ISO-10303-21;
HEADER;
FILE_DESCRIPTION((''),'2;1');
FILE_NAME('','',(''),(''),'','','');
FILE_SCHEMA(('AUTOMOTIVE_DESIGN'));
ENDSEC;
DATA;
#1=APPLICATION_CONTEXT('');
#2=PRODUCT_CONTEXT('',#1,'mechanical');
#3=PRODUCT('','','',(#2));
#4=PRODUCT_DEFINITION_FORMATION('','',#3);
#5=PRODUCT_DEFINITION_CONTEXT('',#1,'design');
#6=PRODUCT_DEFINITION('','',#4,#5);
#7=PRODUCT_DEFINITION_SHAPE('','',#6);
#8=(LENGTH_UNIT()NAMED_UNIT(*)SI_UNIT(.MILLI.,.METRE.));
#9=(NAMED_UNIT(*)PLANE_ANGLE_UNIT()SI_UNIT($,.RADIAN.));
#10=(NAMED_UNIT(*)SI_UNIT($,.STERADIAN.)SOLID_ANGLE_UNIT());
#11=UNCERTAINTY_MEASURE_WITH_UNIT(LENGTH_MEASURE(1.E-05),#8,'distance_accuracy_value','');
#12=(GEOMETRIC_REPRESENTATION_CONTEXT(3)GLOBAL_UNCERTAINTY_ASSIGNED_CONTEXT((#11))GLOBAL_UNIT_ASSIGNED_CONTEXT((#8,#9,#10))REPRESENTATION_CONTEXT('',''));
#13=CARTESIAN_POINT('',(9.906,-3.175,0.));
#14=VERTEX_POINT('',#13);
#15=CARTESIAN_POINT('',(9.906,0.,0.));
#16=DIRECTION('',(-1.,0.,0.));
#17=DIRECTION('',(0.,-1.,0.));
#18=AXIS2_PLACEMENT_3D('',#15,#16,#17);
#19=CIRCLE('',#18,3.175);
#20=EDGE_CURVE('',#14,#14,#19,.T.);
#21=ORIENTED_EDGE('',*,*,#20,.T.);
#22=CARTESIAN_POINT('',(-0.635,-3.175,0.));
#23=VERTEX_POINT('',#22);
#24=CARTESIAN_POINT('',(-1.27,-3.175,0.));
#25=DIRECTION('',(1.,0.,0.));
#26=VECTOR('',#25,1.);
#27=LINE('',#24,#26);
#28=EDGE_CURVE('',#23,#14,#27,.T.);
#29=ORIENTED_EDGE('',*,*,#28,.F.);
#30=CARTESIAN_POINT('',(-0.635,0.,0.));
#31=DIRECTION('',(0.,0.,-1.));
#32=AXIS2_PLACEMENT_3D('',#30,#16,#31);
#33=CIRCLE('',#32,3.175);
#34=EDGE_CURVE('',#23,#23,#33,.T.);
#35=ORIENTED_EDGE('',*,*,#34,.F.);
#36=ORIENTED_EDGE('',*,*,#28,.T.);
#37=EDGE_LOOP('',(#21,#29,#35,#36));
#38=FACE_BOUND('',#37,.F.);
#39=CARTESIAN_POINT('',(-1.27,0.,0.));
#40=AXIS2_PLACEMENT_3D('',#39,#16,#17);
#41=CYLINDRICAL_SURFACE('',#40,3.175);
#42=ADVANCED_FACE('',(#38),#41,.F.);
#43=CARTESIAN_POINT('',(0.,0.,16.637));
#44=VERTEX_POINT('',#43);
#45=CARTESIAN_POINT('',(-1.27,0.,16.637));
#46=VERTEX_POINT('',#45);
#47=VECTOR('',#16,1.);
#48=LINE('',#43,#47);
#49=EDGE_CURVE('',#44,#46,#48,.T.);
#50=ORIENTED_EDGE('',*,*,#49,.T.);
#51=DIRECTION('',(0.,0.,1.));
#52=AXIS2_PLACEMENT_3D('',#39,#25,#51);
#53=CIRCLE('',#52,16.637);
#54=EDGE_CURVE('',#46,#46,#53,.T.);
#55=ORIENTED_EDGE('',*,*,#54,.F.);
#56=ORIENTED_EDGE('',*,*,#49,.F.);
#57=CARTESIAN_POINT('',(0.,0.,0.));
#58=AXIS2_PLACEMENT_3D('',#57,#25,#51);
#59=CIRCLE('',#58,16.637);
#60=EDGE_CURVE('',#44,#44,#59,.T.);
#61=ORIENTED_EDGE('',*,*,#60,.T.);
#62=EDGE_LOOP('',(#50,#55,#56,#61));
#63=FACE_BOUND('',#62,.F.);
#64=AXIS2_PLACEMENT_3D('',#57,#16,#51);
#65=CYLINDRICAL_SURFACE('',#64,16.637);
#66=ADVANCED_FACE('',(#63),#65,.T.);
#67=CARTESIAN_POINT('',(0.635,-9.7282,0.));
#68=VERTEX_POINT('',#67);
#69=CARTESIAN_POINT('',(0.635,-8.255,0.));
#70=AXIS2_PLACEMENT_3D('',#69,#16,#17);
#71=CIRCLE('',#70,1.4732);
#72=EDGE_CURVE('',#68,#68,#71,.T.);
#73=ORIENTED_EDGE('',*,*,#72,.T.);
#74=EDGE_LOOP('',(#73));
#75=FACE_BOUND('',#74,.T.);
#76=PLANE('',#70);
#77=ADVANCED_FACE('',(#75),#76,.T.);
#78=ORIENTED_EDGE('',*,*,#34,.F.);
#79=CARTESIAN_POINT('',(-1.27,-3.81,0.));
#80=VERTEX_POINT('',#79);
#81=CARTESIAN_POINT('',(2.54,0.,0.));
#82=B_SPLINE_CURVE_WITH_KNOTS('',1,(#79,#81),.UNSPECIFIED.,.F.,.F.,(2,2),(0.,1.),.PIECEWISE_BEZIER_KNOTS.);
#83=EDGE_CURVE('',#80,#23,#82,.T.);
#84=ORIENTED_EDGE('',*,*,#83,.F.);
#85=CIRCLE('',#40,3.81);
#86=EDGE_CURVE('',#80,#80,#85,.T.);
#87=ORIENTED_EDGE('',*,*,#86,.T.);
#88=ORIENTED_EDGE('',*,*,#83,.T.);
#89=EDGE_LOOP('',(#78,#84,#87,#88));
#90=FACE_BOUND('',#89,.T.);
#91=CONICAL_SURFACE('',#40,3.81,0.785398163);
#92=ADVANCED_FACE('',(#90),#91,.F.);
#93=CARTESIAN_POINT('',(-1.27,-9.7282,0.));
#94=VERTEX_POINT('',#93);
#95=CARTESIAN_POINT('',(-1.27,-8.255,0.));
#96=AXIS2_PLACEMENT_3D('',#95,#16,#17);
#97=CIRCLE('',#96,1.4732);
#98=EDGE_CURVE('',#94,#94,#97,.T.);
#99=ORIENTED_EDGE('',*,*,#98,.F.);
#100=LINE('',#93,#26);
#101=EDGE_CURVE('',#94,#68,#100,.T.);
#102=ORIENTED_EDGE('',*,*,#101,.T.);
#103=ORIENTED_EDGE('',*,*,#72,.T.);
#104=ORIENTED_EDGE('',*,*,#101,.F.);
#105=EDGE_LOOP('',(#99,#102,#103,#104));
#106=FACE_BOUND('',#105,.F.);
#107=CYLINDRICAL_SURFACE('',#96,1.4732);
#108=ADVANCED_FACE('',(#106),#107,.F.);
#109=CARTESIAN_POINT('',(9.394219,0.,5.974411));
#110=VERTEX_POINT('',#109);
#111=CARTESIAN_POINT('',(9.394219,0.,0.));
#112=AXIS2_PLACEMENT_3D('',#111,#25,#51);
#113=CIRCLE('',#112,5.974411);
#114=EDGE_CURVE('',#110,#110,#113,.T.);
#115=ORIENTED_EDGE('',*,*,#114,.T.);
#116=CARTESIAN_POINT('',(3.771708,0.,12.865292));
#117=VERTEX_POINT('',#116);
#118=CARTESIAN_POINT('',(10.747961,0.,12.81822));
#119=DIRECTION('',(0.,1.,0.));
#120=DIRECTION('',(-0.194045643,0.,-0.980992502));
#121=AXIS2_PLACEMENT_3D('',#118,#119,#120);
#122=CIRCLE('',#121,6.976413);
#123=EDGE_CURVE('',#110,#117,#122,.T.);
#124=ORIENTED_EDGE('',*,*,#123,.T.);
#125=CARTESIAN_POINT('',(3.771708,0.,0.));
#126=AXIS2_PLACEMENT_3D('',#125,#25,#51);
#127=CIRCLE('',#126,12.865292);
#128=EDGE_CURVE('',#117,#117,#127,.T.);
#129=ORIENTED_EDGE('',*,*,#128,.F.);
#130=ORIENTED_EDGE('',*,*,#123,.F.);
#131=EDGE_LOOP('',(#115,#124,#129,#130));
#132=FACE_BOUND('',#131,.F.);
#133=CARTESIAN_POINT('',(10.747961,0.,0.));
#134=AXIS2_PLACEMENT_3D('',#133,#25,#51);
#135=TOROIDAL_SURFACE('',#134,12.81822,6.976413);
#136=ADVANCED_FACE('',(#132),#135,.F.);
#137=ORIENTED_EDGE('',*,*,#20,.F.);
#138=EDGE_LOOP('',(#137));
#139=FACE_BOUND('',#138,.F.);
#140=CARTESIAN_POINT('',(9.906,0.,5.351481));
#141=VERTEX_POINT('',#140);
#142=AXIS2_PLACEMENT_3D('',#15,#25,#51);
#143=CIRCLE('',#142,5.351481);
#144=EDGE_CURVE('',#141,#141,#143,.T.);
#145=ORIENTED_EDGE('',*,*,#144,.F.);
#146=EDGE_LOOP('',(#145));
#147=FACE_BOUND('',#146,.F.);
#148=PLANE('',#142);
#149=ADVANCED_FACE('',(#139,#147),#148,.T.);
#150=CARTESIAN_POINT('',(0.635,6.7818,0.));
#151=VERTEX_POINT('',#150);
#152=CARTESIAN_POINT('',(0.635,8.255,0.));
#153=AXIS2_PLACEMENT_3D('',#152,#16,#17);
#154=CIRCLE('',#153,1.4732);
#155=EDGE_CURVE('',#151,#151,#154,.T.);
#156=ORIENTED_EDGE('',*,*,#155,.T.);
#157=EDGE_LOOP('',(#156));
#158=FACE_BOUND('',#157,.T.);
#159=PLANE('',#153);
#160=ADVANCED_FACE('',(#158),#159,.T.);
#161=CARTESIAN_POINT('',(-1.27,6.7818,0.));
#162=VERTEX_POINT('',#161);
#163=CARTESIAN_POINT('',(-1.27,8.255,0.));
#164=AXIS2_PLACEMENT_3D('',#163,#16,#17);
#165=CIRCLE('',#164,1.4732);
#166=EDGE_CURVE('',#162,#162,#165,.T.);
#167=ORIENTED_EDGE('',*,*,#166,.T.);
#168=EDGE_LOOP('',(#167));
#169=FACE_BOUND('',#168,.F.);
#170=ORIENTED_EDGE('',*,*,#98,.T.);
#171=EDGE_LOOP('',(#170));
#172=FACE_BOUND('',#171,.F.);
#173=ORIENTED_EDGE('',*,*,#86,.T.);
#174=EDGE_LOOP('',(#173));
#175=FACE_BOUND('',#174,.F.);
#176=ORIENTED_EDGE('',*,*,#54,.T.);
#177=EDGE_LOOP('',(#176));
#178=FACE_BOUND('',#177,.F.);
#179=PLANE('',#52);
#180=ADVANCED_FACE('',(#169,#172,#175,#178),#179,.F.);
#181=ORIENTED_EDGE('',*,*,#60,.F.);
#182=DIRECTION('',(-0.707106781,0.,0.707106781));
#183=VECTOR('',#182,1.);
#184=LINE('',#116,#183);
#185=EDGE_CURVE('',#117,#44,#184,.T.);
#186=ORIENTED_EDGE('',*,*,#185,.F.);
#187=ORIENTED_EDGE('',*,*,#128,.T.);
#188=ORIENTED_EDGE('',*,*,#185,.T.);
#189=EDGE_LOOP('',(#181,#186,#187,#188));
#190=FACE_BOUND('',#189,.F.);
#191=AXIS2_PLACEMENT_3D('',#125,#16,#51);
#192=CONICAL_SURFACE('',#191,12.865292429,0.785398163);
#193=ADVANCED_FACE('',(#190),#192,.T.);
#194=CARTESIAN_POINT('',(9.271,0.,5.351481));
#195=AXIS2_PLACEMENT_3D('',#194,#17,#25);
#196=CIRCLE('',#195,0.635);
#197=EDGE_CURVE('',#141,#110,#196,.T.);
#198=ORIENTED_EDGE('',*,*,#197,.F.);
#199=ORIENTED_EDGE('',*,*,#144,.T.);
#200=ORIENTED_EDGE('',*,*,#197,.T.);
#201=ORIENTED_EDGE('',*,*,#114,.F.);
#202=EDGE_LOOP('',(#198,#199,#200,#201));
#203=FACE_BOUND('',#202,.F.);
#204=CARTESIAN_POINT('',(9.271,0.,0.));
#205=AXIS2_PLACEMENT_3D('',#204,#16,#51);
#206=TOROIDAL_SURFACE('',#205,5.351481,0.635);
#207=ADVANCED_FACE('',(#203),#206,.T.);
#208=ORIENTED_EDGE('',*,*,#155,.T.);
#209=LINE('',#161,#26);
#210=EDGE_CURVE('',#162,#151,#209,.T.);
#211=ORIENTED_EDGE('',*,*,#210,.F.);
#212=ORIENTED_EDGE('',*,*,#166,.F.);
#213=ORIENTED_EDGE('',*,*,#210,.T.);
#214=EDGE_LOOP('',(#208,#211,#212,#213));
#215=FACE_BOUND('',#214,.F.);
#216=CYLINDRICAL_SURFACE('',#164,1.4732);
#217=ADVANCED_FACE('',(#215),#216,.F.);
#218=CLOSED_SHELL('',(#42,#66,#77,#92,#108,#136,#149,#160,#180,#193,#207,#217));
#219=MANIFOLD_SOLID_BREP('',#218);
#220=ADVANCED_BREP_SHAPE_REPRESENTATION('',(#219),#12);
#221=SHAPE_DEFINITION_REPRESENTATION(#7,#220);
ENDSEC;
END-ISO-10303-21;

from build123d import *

# Parameters (mm, degrees)
F3_R     = 3.175
F4_DEPTH = 25.4
F5_R     = 3.81
F7_R     = 1.4732
F8_DEPTH = 1.905


# Not quite as in the source:
# - an extrude whose draft closes it to a point is written as a loft to that point


with BuildPart() as f1:
    # F0 (on Front) → F1 (revolve)
    with BuildSketch(Plane.XZ):
        with BuildLine():
            Line((-1.27, 16.637), (-1.27, 0))
            Line((-1.27, 0), (9.906, 0))
            Line((9.906, 0), (9.906, 5.3514806986))
            ThreePointArc((9.906, 5.3514806986), (9.7616470495, 5.7545817689), (9.3942189832, 5.9744109372))
            ThreePointArc((9.3942189832, 5.9744109372), (5.3425686191, 8.407770264), (3.7717075708, 12.8652924292))
            Line((3.7717075708, 12.8652924292), (0, 16.637))
            Line((0, 16.637), (-1.27, 16.637))
        make_face()
    revolve(axis=Axis((4.318, 0, 0), (1, 0, 0)))

    # F3 (on face) → F4 (cut)
    with BuildSketch(Plane(origin=(-1.27, 0, 0), x_dir=(0, -1, 0), z_dir=(-1, 0, 0))):
        Circle(F3_R)
    extrude(amount=-F4_DEPTH, mode=Mode.SUBTRACT)

    # F5 (on face) → F6 section 0
    with BuildSketch(Plane(origin=(-1.27, 0, 0), x_dir=(0, -1, 0), z_dir=(-1, 0, 0)), mode=Mode.PRIVATE) as f6_s0:
        Circle(F5_R)
    loft([f6_s0.sketch, Vertex(2.54, 0, 0)], ruled=True, mode=Mode.SUBTRACT)

    # F7 (on face) → F8 (cut)
    with BuildSketch(Plane(origin=(-1.27, 0, 0), x_dir=(0, -1, 0), z_dir=(-1, 0, 0))):
        with Locations((-8.255, 0)):
            Circle(F7_R)
        with Locations((8.255, 0)):
            Circle(F7_R)
    extrude(amount=-F8_DEPTH, mode=Mode.SUBTRACT)


solid = f1.part
